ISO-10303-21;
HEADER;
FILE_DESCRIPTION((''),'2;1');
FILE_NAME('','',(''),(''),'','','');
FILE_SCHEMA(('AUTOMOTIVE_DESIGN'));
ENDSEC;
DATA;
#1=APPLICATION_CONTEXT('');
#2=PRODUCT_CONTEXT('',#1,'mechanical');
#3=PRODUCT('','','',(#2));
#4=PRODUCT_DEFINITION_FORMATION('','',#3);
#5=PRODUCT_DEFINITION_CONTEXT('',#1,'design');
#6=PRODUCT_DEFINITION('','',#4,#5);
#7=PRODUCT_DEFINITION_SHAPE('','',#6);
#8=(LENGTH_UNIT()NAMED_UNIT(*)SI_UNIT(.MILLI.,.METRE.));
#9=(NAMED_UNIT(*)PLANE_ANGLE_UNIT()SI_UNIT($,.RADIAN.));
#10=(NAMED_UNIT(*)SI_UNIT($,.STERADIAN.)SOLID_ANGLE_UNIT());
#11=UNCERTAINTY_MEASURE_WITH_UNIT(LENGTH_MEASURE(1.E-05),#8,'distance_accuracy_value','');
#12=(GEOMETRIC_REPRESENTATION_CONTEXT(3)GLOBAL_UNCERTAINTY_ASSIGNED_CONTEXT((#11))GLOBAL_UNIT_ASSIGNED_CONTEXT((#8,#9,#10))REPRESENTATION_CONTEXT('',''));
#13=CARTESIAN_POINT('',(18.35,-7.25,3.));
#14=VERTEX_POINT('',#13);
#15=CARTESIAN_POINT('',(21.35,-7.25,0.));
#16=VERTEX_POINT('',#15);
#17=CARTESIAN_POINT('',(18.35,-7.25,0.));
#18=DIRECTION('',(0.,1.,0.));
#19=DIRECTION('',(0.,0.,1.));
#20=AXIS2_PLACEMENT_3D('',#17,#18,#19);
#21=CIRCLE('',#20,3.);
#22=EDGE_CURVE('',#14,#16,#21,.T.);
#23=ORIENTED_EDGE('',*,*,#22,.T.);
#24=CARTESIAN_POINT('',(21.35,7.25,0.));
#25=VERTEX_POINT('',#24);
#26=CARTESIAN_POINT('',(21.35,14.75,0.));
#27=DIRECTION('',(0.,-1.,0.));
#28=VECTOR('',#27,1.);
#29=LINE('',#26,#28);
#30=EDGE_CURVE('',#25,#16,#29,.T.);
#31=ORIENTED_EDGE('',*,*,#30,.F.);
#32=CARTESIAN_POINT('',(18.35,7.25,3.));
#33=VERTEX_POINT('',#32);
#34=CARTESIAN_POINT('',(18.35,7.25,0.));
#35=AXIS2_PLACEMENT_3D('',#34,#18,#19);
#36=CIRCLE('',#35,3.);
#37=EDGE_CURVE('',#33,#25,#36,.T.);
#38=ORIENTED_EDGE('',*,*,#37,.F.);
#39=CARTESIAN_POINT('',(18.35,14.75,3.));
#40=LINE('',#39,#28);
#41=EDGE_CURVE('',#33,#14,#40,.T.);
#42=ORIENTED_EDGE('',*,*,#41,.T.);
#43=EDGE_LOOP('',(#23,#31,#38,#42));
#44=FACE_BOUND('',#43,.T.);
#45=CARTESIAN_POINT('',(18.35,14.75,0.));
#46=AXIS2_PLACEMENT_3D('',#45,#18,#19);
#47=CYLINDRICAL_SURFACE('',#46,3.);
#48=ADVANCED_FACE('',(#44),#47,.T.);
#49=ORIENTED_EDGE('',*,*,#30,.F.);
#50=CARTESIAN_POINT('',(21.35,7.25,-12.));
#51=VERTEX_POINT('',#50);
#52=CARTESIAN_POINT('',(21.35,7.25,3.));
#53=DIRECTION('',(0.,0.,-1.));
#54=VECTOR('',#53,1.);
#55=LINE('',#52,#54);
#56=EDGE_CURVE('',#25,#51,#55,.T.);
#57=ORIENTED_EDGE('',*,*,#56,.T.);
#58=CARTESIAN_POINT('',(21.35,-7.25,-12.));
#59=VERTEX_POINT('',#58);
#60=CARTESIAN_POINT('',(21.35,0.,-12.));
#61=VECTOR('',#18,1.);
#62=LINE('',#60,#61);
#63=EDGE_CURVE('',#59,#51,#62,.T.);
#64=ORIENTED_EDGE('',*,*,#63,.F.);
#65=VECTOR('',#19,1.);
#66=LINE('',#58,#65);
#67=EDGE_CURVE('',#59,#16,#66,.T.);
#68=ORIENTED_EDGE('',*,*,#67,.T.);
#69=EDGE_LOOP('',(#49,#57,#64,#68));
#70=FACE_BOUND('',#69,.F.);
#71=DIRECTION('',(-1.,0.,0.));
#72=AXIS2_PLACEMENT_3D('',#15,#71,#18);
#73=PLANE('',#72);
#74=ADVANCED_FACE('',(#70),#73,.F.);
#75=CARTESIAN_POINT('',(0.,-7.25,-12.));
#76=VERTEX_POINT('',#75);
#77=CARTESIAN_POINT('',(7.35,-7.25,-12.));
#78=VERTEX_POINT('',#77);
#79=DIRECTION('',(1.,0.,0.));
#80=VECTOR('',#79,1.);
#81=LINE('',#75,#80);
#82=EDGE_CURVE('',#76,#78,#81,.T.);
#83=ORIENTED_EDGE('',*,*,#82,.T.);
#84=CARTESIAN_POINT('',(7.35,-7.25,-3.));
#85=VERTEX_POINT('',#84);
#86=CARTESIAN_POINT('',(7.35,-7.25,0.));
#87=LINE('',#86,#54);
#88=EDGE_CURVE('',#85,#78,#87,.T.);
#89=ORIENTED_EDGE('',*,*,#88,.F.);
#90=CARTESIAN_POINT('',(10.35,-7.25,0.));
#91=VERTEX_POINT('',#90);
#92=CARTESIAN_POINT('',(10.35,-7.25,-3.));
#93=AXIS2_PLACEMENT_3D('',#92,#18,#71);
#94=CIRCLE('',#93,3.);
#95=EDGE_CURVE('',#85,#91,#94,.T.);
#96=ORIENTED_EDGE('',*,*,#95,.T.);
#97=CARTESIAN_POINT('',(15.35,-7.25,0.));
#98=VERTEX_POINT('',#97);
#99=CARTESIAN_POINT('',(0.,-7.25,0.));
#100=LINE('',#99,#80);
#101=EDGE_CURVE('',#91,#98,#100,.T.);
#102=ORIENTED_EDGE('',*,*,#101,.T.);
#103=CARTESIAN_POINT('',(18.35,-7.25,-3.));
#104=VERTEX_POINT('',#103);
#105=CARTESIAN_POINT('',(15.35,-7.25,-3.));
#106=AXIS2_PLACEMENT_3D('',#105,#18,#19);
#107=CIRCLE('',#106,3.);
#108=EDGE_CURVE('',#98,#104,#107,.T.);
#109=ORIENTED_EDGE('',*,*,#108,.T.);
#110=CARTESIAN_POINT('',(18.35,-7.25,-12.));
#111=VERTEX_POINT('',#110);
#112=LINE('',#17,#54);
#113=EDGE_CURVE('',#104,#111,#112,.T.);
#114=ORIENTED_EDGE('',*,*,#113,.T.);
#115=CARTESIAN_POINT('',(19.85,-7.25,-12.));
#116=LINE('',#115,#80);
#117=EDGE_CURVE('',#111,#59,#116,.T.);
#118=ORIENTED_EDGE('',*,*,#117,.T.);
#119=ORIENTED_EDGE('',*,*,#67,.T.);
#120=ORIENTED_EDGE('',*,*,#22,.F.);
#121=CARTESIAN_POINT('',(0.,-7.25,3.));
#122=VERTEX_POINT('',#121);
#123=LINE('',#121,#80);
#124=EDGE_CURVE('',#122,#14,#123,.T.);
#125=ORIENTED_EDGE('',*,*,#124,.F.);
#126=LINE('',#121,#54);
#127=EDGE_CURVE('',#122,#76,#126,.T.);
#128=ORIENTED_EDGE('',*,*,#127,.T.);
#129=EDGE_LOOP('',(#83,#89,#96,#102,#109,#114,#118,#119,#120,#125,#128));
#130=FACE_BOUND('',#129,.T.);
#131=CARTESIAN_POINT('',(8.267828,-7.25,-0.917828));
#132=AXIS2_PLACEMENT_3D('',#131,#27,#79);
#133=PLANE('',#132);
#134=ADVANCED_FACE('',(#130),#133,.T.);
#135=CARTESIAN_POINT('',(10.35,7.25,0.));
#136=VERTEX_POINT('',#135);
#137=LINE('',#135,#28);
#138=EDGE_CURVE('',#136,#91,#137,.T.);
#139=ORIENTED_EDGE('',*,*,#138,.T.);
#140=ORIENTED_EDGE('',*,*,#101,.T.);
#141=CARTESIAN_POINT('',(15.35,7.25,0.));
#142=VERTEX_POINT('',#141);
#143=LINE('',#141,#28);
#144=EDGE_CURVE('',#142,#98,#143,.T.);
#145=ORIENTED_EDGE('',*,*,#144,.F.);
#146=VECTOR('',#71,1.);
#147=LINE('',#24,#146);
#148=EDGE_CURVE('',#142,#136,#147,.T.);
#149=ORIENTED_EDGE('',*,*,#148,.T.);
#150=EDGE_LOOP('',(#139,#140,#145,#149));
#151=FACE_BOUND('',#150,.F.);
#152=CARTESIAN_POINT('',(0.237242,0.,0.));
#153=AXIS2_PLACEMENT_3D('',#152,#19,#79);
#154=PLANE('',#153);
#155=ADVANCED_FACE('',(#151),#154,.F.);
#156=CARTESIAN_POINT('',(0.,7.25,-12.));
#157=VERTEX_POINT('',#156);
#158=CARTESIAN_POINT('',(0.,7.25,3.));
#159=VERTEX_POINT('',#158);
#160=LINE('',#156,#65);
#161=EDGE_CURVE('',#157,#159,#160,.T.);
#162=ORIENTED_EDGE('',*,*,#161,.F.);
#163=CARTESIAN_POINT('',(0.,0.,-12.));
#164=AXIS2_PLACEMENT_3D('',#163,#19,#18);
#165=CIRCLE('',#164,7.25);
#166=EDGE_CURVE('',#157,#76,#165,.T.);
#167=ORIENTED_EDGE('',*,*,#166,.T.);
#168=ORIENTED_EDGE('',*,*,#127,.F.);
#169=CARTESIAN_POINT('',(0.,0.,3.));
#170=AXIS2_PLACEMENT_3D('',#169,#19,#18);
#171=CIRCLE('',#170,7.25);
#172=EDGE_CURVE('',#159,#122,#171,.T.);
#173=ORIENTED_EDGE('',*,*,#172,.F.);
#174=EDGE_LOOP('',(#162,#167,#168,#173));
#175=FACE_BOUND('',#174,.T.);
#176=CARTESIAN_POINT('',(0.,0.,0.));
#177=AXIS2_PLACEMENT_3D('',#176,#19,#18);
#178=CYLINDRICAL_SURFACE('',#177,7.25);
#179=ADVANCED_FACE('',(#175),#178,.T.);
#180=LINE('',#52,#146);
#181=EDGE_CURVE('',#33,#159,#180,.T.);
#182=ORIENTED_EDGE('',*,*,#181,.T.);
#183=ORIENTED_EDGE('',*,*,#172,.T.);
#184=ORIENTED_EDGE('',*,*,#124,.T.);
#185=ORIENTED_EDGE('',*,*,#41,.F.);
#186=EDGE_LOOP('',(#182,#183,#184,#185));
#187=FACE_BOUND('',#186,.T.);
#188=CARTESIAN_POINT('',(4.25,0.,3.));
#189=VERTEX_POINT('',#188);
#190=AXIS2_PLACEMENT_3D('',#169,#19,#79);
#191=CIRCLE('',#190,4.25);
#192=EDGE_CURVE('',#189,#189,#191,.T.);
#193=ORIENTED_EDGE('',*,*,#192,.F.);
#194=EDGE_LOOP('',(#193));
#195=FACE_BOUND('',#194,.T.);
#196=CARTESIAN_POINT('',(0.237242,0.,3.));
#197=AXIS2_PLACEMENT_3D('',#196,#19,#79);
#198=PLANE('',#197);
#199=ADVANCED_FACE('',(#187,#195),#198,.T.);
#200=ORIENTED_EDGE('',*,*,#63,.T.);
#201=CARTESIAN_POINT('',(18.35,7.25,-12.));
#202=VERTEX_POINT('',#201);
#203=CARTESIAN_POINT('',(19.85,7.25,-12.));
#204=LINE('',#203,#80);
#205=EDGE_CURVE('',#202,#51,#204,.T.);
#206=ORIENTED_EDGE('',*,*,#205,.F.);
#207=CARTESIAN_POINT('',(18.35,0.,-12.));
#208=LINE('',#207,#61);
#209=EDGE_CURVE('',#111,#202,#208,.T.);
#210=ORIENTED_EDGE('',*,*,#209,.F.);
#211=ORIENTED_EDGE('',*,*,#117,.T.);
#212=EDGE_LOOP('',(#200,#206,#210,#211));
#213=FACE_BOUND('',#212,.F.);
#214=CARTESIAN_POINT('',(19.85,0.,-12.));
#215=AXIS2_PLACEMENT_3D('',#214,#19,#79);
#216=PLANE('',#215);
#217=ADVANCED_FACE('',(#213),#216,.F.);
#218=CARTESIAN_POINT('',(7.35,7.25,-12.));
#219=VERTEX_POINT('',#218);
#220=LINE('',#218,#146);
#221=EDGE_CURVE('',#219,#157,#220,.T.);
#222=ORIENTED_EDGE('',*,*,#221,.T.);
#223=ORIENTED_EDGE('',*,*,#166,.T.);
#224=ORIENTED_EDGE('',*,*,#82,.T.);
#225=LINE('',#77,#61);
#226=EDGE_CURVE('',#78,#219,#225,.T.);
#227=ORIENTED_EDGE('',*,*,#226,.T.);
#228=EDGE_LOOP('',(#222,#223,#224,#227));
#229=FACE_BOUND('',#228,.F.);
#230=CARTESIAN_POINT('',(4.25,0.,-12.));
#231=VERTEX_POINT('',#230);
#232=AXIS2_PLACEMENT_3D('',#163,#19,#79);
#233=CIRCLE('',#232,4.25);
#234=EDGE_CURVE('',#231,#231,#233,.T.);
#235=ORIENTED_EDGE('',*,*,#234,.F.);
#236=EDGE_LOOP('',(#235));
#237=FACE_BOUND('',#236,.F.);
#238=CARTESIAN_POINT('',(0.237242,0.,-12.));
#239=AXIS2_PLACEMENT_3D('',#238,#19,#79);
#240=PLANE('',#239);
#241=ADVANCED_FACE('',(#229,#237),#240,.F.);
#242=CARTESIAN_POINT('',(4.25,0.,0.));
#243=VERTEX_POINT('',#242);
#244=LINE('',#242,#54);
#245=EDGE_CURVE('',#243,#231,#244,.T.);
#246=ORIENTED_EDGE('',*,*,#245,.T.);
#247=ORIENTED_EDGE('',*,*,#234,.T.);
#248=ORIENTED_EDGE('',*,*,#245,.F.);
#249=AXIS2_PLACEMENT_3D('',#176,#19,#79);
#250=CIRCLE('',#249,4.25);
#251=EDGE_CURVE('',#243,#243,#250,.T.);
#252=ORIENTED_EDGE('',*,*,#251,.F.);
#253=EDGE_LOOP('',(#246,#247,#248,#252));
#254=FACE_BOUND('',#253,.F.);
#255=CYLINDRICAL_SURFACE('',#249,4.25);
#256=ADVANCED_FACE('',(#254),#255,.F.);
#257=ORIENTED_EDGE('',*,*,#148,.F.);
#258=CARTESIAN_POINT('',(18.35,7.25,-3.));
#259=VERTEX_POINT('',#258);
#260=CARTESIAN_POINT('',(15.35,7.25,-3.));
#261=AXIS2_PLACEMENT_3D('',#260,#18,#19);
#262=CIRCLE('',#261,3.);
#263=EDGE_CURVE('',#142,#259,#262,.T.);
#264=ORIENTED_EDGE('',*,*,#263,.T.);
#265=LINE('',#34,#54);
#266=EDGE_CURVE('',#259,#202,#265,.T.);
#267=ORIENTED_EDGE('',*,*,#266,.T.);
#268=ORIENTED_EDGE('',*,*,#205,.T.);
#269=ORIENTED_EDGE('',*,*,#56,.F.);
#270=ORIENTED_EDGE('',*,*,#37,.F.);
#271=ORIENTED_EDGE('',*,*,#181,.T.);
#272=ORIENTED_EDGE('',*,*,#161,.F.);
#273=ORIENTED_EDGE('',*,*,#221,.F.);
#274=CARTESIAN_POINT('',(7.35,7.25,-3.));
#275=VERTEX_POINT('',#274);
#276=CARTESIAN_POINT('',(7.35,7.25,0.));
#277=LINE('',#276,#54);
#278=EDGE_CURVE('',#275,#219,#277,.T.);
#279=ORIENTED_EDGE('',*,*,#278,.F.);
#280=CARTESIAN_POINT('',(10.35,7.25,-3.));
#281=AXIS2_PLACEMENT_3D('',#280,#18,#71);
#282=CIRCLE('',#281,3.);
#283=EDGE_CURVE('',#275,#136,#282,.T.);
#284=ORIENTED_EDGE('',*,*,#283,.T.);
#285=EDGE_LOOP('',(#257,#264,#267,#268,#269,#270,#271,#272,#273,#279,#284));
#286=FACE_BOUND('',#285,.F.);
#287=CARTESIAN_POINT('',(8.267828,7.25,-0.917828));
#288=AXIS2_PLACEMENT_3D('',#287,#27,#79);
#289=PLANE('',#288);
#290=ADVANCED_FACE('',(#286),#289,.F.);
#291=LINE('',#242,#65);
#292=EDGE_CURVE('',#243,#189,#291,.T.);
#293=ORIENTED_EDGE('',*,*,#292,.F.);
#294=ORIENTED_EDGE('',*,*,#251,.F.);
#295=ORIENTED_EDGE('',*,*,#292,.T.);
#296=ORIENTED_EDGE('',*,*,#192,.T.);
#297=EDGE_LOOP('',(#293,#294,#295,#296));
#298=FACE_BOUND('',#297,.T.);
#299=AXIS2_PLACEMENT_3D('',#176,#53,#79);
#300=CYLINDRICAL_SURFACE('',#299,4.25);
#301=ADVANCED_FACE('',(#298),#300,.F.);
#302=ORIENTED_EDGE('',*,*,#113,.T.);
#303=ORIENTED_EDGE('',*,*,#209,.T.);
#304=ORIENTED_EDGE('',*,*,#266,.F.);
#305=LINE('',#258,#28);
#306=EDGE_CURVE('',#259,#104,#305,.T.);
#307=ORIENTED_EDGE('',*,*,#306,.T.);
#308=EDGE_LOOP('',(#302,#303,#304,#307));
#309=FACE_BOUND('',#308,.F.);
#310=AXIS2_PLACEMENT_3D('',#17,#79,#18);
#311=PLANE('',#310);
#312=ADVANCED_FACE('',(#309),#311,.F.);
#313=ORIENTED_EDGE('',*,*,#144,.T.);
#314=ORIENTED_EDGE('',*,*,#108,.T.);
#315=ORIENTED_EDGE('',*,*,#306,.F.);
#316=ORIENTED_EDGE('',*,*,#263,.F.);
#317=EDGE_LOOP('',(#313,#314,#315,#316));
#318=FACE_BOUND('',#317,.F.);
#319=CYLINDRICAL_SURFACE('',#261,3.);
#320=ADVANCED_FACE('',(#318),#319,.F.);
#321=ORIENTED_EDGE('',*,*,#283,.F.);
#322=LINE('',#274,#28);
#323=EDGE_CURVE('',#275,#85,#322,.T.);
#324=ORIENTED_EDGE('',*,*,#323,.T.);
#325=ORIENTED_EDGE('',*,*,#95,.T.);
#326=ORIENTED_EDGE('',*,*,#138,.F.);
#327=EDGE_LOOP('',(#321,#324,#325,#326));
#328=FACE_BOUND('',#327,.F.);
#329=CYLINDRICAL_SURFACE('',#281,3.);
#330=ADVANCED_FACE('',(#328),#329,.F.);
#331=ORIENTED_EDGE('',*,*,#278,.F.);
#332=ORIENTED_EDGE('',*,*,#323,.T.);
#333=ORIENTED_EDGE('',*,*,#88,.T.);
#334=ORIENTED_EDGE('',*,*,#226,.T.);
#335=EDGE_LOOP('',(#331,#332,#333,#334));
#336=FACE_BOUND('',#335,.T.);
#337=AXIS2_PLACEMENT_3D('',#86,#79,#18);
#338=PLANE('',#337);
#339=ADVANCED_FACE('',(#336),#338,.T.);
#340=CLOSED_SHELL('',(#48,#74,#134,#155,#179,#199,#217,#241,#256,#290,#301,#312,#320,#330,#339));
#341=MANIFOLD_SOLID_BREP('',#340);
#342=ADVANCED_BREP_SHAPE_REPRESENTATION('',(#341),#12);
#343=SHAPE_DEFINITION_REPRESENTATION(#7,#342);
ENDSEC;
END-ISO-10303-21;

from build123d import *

# Parameters (mm, degrees)
F0_R        = 4.25
F0_W        = 11
F0_H        = 14.5
F0_W_2      = 3
F1_DEPTH    = 3
F2_DEPTH    = 12
F3_T1_DEPTH = 14.5
F3_T3_DEPTH = 29.5
F5_R        = 4.25
F6_DEPTH    = 22
F7_DEPTH    = 3
F8_T1_DEPTH = 28


# Not quite as in the source:
# - a fillet or chamfer that OpenCascade refuses, or shapes differently, is made with other operations: its cross-section is extruded or revolved along the edge and cut away or added


with BuildPart() as f1:
    # F0 (on Top) → F1 (new body)
    with BuildSketch(Plane.XY):
        with BuildLine():
            ThreePointArc((0, -7.25), (5.1265241636, -5.1265241636), (7.25, 0))
            ThreePointArc((7.25, 0), (5.1265241636, 5.1265241636), (0, 7.25))
            ThreePointArc((0, 7.25), (-7.25, 0), (0, -7.25))
        make_face()
        Circle(F0_R, mode=Mode.SUBTRACT)
        with BuildLine():
            Line((7.25, -7.25), (7.25, 0))
            ThreePointArc((7.25, 0), (5.1265241636, -5.1265241636), (0, -7.25))
            Line((0, -7.25), (7.25, -7.25))
        make_face()
        with BuildLine():
            ThreePointArc((0, 7.25), (5.1265241636, 5.1265241636), (7.25, 0))
            Line((7.25, 0), (7.25, 7.25))
            Line((7.25, 7.25), (0, 7.25))
        make_face()
        Polygon((7.25, 7.25), (7.25, 0), (7.25, -7.25), (7.35, -7.25), (7.35, 7.25), align=None)
        with Locations((12.85, 0)):
            Rectangle(F0_W, F0_H)
        with Locations((19.85, 0)):
            Rectangle(F0_W_2, F0_H)
    extrude(amount=F1_DEPTH)

    # F0 (on Top) → F2 (join)
    with BuildSketch(Plane.XY):
        with BuildLine():
            ThreePointArc((0, -7.25), (5.1265241636, -5.1265241636), (7.25, 0))
            ThreePointArc((7.25, 0), (5.1265241636, 5.1265241636), (0, 7.25))
            ThreePointArc((0, 7.25), (-7.25, 0), (0, -7.25))
        make_face()
        Circle(F0_R, mode=Mode.SUBTRACT)
        with BuildLine():
            ThreePointArc((0, 7.25), (5.1265241636, 5.1265241636), (7.25, 0))
            Line((7.25, 0), (7.25, 7.25))
            Line((7.25, 7.25), (0, 7.25))
        make_face()
        Polygon((7.25, 7.25), (7.25, 0), (7.25, -7.25), (7.35, -7.25), (7.35, 7.25), align=None)
        with Locations((19.85, 0)):
            Rectangle(F0_W_2, F0_H)
        with BuildLine():
            Line((7.25, -7.25), (7.25, 0))
            ThreePointArc((7.25, 0), (5.1265241636, -5.1265241636), (0, -7.25))
            Line((0, -7.25), (7.25, -7.25))
        make_face()
    extrude(amount=-F2_DEPTH)

    # F3: fillet of radius 3 on 3 edges, made by hand

    # F3_s2 → F3_t1 (join)
    with BuildSketch(Plane.XZ.offset(-7.25)):
        with BuildLine():
            ThreePointArc((7.35, -3), (8.2286796564, -0.8786796564), (10.35, 0))
            Line((10.35, 0), (7.35, 0))
            Line((7.35, 0), (7.35, -3))
        make_face()
        with BuildLine():
            ThreePointArc((15.35, 0), (17.4713203436, -0.8786796564), (18.35, -3))
            Line((18.35, -3), (18.35, 0))
            Line((18.35, 0), (15.35, 0))
        make_face()
    extrude(amount=F3_T1_DEPTH)

    # F3_s4 → F3_t3 (cut)
    with BuildSketch(Plane.XZ.offset(-14.75)):
        with BuildLine():
            ThreePointArc((18.35, 3), (20.4713203436, 2.1213203436), (21.35, 0))
            Line((21.35, 0), (21.35, 3))
            Line((21.35, 3), (18.35, 3))
        make_face()
    extrude(amount=F3_T3_DEPTH, mode=Mode.SUBTRACT)


with BuildPart() as f6:
    # F5 (on offset) → F6 (new body)
    with BuildSketch(Plane(origin=(0, 0, -37), x_dir=(1, 0, 0), z_dir=(0, 0, -1))):
        with BuildLine():
            Line((7.35, 7.25), (0, 7.25))
            ThreePointArc((0, 7.25), (-7.25, 0), (0, -7.25))
            Line((0, -7.25), (7.35, -7.25))
            Line((7.35, -7.25), (7.35, 7.25))
        make_face()
        Circle(F5_R, mode=Mode.SUBTRACT)
    extrude(amount=-F6_DEPTH)

    # F5 (on offset) → F7 (join)
    with BuildSketch(Plane(origin=(0, 0, -37), x_dir=(1, 0, 0), z_dir=(0, 0, -1))):
        with BuildLine():
            Line((7.35, 7.25), (0, 7.25))
            ThreePointArc((0, 7.25), (-7.25, 0), (0, -7.25))
            Line((0, -7.25), (7.35, -7.25))
            Line((7.35, -7.25), (7.35, 7.25))
        make_face()
        Circle(F5_R, mode=Mode.SUBTRACT)
        with BuildLine():
            ThreePointArc((0, -7.25), (-7.25, 0), (0, 7.25))
            Line((0, 7.25), (-37.25, 7.25))
            Line((-37.25, 7.25), (-37.25, 4))
            Line((-37.25, 4), (-22.25, 4))
            ThreePointArc((-22.25, 4), (-18.25, 0), (-22.25, -4))
            Line((-22.25, -4), (-37.25, -4))
            Line((-37.25, -4), (-37.25, -7.25))
            Line((-37.25, -7.25), (0, -7.25))
        make_face()
    extrude(amount=F7_DEPTH)

    # F8: fillet of radius 5 on 2 edges, made by hand

    # F8_s2 → F8_t1 (cut)
    with BuildSketch(Plane.XY.offset(-52.5)):
        with BuildLine():
            ThreePointArc((-32.25, -7.25), (-35.7855339059, -5.7855339059), (-37.25, -2.25))
            Line((-37.25, -2.25), (-37.25, -7.25))
            Line((-37.25, -7.25), (-32.25, -7.25))
        make_face()
        with BuildLine():
            ThreePointArc((-32.25, 7.25), (-35.7855339059, 5.7855339059), (-37.25, 2.25))
            Line((-37.25, 2.25), (-37.25, 7.25))
            Line((-37.25, 7.25), (-32.25, 7.25))
        make_face()
    extrude(amount=F8_T1_DEPTH, mode=Mode.SUBTRACT)


solid = f1.part
